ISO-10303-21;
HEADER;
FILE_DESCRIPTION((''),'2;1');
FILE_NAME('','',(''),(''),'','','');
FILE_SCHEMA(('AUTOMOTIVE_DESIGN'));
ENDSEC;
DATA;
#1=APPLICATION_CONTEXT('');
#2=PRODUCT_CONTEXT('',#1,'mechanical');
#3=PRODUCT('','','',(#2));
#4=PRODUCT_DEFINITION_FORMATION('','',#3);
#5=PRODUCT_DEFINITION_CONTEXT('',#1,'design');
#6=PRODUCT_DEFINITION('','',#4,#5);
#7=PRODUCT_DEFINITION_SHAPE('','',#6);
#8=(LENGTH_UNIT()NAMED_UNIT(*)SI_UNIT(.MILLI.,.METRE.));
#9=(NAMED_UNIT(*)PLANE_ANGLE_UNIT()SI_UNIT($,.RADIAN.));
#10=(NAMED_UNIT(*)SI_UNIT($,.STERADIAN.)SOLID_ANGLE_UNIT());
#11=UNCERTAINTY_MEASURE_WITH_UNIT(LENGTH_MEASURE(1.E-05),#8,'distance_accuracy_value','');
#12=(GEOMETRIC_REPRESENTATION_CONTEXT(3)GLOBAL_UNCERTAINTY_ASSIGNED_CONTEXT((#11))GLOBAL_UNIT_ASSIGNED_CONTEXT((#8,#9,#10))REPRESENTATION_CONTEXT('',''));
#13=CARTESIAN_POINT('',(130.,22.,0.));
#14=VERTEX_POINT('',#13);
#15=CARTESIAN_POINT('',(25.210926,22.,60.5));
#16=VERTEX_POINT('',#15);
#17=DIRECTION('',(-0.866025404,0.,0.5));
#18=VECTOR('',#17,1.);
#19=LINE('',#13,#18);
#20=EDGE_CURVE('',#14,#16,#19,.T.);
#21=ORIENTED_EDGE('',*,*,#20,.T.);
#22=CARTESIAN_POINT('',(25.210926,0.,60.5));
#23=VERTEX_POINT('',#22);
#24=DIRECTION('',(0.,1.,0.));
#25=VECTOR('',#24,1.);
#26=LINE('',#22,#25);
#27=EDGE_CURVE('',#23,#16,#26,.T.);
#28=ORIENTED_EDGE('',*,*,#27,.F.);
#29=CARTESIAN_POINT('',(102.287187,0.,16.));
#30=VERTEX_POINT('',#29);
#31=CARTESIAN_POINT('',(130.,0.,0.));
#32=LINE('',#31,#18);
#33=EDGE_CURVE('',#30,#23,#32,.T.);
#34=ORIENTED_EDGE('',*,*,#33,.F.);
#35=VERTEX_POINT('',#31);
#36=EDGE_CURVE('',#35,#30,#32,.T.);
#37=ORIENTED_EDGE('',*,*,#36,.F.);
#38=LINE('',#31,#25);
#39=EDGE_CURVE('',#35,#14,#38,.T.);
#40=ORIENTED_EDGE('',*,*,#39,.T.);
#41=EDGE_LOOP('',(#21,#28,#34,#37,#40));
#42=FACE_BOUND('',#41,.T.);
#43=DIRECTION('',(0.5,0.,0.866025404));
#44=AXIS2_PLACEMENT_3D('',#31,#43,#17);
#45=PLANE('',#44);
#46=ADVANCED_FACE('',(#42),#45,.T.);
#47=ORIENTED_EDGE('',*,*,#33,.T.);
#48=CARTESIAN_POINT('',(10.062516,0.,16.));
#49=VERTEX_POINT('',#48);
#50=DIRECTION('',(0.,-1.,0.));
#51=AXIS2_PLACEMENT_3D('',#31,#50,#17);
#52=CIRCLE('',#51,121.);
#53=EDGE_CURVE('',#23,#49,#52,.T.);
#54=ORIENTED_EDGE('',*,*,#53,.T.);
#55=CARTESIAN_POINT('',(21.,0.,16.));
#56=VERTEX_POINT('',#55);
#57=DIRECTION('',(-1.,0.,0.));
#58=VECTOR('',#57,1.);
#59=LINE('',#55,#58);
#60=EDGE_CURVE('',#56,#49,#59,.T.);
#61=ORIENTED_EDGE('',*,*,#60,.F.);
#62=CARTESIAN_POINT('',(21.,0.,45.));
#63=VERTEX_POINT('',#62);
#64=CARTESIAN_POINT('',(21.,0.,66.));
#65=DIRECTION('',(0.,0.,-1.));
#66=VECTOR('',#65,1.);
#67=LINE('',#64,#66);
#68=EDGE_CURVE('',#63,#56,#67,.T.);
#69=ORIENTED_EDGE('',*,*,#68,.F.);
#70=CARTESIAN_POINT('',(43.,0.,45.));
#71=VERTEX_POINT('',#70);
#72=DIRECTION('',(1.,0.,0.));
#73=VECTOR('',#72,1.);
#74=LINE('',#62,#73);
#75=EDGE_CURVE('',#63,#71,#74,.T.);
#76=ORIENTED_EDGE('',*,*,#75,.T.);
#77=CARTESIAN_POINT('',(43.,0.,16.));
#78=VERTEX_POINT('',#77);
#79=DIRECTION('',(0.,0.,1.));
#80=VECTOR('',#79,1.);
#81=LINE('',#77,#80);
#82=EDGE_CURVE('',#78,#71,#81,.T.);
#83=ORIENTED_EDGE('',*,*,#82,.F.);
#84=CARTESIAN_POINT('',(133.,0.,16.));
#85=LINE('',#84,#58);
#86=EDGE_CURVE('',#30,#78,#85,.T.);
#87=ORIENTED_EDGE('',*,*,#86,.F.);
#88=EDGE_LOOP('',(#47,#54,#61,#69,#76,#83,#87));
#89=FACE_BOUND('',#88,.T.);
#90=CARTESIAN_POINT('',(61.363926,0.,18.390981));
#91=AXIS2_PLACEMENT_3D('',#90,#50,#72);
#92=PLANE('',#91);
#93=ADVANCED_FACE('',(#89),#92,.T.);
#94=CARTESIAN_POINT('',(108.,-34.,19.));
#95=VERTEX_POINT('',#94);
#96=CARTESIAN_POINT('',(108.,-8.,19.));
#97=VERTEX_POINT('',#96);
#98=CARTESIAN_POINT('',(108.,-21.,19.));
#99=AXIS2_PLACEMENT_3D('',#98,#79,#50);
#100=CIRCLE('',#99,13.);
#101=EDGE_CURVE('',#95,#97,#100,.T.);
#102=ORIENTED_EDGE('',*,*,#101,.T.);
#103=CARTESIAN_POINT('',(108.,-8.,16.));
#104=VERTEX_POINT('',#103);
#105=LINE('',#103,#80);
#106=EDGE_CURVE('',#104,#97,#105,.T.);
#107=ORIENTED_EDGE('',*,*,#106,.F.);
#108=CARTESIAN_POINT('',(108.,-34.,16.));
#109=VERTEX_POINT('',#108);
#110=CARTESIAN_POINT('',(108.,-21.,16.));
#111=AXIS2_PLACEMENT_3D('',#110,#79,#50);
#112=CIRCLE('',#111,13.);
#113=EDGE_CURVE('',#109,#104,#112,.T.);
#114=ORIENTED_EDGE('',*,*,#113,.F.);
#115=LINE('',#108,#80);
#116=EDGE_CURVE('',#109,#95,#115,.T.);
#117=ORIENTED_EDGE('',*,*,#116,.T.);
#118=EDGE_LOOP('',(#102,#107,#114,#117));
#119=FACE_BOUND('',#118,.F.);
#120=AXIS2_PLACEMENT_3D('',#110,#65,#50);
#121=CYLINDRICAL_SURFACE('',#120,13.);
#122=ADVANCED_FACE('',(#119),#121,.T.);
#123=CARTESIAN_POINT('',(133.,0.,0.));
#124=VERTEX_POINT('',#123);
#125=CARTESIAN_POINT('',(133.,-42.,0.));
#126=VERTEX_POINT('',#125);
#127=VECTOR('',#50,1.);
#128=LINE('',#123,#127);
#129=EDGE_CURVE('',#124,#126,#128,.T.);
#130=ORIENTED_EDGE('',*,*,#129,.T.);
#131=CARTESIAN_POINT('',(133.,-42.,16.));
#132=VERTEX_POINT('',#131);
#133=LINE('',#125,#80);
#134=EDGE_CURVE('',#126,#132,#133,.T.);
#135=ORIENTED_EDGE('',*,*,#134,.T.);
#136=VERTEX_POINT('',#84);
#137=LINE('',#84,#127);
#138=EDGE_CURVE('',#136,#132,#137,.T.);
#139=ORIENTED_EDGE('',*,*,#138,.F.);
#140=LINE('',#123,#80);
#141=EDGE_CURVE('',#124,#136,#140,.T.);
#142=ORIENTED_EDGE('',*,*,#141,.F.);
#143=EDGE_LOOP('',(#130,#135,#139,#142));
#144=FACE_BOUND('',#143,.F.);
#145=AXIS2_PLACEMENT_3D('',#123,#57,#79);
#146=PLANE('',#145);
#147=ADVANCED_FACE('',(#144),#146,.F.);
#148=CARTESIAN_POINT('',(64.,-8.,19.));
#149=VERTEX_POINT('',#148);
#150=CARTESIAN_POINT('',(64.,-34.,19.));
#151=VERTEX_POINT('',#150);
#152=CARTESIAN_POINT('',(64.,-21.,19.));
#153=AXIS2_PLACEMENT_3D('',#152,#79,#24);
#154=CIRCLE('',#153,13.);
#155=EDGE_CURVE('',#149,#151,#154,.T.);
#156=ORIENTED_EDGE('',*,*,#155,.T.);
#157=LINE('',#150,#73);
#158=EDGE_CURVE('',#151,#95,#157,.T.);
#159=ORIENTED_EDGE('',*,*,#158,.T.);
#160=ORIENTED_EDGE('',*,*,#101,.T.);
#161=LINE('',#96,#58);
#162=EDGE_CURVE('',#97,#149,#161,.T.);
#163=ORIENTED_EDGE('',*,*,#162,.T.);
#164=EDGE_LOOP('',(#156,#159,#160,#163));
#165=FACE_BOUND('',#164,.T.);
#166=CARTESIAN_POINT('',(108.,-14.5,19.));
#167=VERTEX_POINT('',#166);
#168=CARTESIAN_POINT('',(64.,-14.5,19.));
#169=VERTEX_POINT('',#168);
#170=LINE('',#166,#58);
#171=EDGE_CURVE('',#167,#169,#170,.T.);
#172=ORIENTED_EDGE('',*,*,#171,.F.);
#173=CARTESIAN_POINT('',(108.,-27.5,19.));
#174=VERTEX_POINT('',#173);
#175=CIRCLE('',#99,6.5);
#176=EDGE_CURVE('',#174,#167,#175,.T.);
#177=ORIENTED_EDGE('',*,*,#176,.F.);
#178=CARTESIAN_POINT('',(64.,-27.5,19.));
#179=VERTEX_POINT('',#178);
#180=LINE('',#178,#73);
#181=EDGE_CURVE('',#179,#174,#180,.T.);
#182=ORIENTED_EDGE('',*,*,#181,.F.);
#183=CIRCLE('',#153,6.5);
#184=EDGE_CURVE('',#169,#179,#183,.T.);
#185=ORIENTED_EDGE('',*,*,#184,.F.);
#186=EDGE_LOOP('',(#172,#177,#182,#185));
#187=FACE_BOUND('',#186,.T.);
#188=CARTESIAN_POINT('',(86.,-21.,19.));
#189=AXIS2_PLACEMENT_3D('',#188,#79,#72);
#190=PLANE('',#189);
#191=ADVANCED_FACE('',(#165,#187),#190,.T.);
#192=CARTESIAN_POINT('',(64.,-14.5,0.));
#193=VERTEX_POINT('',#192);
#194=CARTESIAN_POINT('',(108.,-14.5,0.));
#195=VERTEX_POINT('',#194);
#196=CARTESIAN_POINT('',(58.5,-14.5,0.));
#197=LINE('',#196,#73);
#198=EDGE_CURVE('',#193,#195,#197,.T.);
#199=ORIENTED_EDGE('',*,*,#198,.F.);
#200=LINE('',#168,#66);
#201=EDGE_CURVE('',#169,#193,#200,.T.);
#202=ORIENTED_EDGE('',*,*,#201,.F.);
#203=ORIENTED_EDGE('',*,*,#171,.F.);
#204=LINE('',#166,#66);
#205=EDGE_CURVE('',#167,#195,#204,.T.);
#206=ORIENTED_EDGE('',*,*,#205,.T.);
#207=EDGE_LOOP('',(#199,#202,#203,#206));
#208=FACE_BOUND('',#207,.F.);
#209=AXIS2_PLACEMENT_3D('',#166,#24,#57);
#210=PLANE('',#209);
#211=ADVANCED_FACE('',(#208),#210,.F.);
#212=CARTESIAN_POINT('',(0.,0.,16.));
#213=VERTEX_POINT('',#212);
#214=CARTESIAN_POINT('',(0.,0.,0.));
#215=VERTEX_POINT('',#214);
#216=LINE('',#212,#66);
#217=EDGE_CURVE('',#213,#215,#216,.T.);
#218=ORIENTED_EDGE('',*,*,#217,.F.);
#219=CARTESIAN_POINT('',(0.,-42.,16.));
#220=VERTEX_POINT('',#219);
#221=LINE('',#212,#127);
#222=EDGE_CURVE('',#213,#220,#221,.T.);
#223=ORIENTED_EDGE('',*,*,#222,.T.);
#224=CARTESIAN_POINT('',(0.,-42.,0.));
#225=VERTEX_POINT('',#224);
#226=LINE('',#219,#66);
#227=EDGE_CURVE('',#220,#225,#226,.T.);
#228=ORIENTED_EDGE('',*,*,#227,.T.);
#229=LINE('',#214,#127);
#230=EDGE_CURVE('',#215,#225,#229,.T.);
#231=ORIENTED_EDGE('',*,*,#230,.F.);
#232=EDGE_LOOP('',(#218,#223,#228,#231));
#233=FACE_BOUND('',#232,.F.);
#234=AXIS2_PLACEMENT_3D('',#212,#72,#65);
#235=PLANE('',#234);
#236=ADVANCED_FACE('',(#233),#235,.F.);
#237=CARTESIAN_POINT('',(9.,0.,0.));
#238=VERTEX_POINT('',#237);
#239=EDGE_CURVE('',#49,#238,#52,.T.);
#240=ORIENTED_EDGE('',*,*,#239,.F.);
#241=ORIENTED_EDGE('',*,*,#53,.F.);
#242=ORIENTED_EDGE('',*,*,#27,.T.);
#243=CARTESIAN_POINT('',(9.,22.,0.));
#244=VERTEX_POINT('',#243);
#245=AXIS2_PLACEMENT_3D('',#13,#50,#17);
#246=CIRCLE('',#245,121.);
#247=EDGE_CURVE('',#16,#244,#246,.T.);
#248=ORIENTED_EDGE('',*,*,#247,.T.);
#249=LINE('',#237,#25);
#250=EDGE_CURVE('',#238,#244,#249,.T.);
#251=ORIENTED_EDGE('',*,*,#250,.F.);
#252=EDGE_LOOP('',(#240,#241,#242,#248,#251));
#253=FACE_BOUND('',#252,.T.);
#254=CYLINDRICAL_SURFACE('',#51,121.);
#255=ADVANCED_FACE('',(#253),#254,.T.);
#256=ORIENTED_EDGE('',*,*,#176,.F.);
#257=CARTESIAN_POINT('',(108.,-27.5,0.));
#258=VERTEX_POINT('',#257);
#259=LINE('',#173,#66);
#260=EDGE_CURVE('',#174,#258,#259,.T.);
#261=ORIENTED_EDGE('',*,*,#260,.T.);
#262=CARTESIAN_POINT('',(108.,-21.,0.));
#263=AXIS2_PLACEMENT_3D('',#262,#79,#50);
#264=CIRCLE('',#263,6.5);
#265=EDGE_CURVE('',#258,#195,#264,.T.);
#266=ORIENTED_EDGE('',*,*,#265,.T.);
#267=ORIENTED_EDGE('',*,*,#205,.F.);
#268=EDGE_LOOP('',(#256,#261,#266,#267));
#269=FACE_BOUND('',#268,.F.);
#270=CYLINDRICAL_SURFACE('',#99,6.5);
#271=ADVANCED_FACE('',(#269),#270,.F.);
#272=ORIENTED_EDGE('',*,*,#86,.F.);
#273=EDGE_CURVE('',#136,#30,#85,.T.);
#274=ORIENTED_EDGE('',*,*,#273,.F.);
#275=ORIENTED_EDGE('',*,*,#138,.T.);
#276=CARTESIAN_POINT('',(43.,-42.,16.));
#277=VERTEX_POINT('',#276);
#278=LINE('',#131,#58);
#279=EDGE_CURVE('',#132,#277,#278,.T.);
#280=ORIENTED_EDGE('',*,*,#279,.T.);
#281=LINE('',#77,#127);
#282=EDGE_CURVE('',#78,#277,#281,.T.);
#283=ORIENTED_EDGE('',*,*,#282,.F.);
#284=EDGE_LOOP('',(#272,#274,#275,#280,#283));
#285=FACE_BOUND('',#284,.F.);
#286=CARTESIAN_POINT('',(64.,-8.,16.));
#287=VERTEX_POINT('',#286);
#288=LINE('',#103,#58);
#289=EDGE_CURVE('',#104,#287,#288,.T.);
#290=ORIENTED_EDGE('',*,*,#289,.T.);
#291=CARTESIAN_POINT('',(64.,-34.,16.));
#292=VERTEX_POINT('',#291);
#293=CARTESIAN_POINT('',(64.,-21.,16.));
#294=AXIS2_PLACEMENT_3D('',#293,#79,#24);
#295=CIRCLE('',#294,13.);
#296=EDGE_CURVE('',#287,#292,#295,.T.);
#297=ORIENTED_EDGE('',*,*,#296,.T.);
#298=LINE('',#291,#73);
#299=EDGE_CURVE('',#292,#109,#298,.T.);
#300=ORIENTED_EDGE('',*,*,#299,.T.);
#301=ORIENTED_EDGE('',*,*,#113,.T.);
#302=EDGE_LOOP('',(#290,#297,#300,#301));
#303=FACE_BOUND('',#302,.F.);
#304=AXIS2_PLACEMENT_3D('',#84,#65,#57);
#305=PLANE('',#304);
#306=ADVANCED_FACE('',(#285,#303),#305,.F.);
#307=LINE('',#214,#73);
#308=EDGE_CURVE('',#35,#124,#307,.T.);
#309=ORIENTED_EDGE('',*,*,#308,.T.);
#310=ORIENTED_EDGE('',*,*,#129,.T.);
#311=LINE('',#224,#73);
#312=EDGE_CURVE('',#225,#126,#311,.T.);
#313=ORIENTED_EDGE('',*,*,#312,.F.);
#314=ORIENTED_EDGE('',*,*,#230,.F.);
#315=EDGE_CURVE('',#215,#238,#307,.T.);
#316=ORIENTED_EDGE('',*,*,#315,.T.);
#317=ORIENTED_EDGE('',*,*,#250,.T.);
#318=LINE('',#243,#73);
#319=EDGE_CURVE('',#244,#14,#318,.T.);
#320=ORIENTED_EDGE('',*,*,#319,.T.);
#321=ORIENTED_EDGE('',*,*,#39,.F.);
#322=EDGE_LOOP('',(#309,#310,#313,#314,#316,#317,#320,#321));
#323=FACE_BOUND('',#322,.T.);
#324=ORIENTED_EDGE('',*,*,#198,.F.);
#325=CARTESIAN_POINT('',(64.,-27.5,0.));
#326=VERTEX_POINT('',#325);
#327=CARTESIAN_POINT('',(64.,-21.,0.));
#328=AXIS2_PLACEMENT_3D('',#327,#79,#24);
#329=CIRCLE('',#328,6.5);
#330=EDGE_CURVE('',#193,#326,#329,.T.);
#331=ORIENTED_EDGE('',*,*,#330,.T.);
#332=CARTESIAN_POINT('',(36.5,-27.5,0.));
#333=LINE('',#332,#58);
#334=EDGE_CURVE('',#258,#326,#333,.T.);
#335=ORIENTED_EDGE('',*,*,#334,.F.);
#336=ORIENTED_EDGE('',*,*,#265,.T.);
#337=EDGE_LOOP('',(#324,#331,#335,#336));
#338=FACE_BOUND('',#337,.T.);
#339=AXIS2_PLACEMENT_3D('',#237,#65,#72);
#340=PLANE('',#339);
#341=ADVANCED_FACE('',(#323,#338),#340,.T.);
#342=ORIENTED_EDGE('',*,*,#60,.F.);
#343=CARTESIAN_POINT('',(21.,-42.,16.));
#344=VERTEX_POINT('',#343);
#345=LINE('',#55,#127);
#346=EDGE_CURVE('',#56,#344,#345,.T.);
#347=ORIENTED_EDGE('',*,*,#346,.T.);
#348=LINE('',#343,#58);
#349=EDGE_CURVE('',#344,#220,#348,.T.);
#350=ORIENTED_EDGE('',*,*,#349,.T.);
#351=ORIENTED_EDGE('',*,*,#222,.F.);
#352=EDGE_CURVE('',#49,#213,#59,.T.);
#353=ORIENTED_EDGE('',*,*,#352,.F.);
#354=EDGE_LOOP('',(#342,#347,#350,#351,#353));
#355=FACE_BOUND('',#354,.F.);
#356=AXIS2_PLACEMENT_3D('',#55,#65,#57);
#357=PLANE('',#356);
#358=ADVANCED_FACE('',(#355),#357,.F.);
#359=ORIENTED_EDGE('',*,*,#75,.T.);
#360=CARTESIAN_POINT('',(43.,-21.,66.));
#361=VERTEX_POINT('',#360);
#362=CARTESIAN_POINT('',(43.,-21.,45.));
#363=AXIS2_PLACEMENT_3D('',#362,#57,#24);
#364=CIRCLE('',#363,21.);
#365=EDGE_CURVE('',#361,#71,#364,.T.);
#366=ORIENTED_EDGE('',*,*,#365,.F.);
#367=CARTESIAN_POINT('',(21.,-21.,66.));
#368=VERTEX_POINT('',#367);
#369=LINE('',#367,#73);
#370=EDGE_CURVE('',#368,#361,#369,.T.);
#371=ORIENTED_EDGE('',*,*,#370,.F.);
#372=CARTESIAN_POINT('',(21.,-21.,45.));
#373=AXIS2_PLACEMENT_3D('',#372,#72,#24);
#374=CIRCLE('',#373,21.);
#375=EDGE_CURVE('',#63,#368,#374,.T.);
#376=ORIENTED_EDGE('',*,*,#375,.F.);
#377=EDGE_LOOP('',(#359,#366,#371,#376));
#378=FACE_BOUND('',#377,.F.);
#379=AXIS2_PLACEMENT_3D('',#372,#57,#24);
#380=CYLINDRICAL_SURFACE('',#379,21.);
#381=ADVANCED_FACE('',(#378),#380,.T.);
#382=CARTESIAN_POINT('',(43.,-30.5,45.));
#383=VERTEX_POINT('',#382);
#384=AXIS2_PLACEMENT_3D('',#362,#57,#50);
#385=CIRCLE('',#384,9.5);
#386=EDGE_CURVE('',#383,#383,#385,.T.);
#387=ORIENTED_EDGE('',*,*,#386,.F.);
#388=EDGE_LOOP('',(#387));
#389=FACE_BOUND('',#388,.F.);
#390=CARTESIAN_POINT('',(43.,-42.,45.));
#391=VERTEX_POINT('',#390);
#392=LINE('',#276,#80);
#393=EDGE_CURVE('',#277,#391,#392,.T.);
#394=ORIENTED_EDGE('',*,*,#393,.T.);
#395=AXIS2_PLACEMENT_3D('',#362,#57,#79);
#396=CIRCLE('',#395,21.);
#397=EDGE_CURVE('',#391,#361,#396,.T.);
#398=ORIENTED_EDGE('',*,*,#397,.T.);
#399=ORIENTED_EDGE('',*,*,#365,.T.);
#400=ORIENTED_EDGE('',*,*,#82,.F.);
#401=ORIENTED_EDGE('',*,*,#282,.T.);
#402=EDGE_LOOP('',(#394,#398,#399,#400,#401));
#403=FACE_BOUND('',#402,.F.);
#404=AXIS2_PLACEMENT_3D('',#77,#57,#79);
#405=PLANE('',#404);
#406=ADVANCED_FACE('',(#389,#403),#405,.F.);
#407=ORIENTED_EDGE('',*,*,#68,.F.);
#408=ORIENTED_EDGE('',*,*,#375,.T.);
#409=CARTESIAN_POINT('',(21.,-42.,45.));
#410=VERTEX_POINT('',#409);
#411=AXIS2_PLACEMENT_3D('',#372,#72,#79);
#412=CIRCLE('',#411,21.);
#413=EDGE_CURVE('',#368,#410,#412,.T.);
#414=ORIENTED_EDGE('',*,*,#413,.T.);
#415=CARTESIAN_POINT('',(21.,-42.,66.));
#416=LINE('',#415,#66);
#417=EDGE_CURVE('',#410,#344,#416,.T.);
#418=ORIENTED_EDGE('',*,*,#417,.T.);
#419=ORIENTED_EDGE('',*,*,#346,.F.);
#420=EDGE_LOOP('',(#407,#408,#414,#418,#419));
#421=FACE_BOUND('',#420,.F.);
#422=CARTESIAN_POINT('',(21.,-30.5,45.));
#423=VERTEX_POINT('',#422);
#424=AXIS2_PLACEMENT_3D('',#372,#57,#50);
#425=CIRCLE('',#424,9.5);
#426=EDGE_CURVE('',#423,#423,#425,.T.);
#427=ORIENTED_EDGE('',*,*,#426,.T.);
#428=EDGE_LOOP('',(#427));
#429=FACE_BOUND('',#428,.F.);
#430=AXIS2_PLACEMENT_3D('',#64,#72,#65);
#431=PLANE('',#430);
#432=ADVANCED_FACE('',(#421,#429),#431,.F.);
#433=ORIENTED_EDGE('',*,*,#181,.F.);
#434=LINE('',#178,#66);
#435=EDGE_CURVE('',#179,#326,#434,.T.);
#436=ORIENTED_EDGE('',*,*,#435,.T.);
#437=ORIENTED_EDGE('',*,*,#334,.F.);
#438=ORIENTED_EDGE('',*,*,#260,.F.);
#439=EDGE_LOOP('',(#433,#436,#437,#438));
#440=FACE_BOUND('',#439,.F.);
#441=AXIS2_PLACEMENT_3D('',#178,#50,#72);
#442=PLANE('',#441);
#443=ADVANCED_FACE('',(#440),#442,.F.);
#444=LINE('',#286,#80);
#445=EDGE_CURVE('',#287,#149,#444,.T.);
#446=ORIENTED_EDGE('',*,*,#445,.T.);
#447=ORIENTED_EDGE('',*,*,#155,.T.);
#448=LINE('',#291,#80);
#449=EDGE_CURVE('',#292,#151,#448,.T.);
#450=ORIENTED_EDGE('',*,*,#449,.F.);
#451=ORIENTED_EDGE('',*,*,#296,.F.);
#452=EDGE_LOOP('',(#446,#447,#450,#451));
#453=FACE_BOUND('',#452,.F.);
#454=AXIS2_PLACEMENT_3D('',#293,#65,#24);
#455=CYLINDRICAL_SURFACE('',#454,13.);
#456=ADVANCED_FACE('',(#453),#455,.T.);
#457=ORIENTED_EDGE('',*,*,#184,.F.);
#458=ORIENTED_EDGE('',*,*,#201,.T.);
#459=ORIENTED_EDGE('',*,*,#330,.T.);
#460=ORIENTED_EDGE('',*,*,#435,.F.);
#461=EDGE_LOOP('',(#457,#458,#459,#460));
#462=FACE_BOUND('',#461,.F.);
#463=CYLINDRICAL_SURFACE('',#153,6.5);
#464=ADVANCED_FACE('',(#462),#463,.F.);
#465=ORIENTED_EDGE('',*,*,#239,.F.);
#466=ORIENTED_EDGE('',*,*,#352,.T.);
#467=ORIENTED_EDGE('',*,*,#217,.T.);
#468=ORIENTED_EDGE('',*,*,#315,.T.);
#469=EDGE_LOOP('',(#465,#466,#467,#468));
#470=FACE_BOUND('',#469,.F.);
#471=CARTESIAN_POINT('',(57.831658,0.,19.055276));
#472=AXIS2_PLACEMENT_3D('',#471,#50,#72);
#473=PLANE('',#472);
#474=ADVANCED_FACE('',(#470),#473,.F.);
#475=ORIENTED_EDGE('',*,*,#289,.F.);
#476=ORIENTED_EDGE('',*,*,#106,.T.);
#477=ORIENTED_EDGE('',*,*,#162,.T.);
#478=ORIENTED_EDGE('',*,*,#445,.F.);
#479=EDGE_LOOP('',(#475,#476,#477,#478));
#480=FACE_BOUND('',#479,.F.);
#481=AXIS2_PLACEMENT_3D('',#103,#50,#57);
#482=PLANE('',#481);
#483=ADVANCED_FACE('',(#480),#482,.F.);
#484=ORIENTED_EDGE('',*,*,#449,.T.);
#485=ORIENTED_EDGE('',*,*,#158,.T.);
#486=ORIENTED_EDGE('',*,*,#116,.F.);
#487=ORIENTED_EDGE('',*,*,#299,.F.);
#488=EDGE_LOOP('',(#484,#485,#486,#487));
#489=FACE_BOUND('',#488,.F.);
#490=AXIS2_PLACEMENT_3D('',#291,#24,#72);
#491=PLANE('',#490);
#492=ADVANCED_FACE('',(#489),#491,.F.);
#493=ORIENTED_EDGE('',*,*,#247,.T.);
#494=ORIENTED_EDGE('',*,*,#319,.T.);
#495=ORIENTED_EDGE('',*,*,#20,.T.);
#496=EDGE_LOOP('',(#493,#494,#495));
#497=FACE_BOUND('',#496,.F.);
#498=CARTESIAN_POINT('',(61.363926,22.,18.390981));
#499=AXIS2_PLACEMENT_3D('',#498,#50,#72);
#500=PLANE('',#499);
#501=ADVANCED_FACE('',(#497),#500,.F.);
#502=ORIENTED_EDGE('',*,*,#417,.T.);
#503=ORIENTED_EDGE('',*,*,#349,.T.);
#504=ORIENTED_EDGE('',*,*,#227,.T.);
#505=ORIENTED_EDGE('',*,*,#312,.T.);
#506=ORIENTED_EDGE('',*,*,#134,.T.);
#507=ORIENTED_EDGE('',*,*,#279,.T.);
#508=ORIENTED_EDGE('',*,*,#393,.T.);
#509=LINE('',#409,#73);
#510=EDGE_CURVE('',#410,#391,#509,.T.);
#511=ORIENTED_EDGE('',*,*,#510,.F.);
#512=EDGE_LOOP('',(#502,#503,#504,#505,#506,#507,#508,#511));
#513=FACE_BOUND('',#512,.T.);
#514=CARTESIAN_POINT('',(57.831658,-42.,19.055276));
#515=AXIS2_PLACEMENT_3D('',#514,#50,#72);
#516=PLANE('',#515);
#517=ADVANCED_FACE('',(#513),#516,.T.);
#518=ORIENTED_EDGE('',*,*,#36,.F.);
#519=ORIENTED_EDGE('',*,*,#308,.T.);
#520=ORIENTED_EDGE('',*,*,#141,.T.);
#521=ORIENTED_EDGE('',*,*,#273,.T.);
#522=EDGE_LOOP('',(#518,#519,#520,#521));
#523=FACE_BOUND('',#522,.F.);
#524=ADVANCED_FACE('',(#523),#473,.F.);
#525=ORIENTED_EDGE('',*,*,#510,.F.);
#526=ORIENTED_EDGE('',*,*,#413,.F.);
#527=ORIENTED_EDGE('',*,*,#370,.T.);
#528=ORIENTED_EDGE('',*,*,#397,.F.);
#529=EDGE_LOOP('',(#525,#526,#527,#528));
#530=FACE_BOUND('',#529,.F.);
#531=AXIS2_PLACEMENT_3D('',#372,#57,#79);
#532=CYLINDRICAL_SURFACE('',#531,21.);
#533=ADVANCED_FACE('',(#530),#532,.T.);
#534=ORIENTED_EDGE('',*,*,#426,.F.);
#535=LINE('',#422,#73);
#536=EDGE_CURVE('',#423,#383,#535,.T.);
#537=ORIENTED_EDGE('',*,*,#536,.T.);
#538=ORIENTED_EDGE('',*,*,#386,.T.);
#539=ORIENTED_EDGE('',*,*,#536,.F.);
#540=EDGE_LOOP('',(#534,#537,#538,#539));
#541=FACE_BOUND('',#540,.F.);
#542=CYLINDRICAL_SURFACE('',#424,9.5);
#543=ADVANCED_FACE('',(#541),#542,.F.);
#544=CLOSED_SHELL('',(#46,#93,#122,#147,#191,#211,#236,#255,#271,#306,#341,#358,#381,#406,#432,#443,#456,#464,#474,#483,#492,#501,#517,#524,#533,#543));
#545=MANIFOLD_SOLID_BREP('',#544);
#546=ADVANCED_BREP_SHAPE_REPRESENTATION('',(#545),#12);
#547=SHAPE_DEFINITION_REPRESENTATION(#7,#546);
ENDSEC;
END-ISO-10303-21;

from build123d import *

# Parameters (mm, degrees)
F1_DEPTH  = 42
F3_DEPTH  = 112.001
F4_R      = 9.5
F5_DEPTH  = 112.001
F7_DEPTH  = 3
F9_DEPTH  = 22
F11_DEPTH = 25


with BuildPart() as f1:
    # F0 (on Front) → F1 (new body)
    with BuildSketch(Plane.XZ):
        Polygon((0, 16), (0, 0), (133, 0), (133, 16), (43, 16), (43, 66), (21, 66), (21, 16), align=None)
    extrude(amount=F1_DEPTH)

    # F2 (on face) → F3 (cut, through all)
    with BuildSketch(Plane(origin=(21, 0, 0), x_dir=(0, -1, 0), z_dir=(-1, 0, 0))):
        with BuildLine():
            Line((0, 66), (0, 45))
            ThreePointArc((0, 45), (6.1507575951, 59.8492424049), (21, 66))
            Line((21, 66), (0, 66))
        make_face()
        with BuildLine():
            Line((42, 66), (21, 66))
            ThreePointArc((21, 66), (35.8492424049, 59.8492424049), (42, 45))
            Line((42, 45), (42, 66))
        make_face()
    extrude(amount=-F3_DEPTH, mode=Mode.SUBTRACT)

    # F4 (on face) → F5 (cut, through all)
    with BuildSketch(Plane(origin=(21, 0, 0), x_dir=(0, -1, 0), z_dir=(-1, 0, 0))):
        with Locations((21, 45)):
            Circle(F4_R)
    extrude(amount=-F5_DEPTH, mode=Mode.SUBTRACT)

    # F6 (on face) → F7 (join)
    with BuildSketch(Plane.XY.offset(16)):
        with BuildLine():
            Line((108, -8), (64, -8))
            ThreePointArc((64, -8), (51, -21), (64, -34))
            Line((64, -34), (108, -34))
            ThreePointArc((108, -34), (121, -21), (108, -8))
        make_face()
    extrude(amount=F7_DEPTH)

    # F8 (on Front) → F9 (join)
    with BuildSketch(Plane.XZ):
        with BuildLine():
            ThreePointArc((25.2109261421, 60.5), (13.122975019, 31.3171044574), (9, 0))
            Line((9, 0), (130, 0))
            Line((130, 0), (25.2109261421, 60.5))
        make_face()
    extrude(amount=-F9_DEPTH)

    # F10 (on face) → F11 (cut)
    with BuildSketch(Plane.XY.offset(19)):
        with BuildLine():
            Line((108, -14.5), (64, -14.5))
            ThreePointArc((64, -14.5), (57.5, -21), (64, -27.5))
            Line((64, -27.5), (108, -27.5))
            ThreePointArc((108, -27.5), (114.5, -21), (108, -14.5))
        make_face()
    extrude(amount=-F11_DEPTH, mode=Mode.SUBTRACT)


solid = f1.part
